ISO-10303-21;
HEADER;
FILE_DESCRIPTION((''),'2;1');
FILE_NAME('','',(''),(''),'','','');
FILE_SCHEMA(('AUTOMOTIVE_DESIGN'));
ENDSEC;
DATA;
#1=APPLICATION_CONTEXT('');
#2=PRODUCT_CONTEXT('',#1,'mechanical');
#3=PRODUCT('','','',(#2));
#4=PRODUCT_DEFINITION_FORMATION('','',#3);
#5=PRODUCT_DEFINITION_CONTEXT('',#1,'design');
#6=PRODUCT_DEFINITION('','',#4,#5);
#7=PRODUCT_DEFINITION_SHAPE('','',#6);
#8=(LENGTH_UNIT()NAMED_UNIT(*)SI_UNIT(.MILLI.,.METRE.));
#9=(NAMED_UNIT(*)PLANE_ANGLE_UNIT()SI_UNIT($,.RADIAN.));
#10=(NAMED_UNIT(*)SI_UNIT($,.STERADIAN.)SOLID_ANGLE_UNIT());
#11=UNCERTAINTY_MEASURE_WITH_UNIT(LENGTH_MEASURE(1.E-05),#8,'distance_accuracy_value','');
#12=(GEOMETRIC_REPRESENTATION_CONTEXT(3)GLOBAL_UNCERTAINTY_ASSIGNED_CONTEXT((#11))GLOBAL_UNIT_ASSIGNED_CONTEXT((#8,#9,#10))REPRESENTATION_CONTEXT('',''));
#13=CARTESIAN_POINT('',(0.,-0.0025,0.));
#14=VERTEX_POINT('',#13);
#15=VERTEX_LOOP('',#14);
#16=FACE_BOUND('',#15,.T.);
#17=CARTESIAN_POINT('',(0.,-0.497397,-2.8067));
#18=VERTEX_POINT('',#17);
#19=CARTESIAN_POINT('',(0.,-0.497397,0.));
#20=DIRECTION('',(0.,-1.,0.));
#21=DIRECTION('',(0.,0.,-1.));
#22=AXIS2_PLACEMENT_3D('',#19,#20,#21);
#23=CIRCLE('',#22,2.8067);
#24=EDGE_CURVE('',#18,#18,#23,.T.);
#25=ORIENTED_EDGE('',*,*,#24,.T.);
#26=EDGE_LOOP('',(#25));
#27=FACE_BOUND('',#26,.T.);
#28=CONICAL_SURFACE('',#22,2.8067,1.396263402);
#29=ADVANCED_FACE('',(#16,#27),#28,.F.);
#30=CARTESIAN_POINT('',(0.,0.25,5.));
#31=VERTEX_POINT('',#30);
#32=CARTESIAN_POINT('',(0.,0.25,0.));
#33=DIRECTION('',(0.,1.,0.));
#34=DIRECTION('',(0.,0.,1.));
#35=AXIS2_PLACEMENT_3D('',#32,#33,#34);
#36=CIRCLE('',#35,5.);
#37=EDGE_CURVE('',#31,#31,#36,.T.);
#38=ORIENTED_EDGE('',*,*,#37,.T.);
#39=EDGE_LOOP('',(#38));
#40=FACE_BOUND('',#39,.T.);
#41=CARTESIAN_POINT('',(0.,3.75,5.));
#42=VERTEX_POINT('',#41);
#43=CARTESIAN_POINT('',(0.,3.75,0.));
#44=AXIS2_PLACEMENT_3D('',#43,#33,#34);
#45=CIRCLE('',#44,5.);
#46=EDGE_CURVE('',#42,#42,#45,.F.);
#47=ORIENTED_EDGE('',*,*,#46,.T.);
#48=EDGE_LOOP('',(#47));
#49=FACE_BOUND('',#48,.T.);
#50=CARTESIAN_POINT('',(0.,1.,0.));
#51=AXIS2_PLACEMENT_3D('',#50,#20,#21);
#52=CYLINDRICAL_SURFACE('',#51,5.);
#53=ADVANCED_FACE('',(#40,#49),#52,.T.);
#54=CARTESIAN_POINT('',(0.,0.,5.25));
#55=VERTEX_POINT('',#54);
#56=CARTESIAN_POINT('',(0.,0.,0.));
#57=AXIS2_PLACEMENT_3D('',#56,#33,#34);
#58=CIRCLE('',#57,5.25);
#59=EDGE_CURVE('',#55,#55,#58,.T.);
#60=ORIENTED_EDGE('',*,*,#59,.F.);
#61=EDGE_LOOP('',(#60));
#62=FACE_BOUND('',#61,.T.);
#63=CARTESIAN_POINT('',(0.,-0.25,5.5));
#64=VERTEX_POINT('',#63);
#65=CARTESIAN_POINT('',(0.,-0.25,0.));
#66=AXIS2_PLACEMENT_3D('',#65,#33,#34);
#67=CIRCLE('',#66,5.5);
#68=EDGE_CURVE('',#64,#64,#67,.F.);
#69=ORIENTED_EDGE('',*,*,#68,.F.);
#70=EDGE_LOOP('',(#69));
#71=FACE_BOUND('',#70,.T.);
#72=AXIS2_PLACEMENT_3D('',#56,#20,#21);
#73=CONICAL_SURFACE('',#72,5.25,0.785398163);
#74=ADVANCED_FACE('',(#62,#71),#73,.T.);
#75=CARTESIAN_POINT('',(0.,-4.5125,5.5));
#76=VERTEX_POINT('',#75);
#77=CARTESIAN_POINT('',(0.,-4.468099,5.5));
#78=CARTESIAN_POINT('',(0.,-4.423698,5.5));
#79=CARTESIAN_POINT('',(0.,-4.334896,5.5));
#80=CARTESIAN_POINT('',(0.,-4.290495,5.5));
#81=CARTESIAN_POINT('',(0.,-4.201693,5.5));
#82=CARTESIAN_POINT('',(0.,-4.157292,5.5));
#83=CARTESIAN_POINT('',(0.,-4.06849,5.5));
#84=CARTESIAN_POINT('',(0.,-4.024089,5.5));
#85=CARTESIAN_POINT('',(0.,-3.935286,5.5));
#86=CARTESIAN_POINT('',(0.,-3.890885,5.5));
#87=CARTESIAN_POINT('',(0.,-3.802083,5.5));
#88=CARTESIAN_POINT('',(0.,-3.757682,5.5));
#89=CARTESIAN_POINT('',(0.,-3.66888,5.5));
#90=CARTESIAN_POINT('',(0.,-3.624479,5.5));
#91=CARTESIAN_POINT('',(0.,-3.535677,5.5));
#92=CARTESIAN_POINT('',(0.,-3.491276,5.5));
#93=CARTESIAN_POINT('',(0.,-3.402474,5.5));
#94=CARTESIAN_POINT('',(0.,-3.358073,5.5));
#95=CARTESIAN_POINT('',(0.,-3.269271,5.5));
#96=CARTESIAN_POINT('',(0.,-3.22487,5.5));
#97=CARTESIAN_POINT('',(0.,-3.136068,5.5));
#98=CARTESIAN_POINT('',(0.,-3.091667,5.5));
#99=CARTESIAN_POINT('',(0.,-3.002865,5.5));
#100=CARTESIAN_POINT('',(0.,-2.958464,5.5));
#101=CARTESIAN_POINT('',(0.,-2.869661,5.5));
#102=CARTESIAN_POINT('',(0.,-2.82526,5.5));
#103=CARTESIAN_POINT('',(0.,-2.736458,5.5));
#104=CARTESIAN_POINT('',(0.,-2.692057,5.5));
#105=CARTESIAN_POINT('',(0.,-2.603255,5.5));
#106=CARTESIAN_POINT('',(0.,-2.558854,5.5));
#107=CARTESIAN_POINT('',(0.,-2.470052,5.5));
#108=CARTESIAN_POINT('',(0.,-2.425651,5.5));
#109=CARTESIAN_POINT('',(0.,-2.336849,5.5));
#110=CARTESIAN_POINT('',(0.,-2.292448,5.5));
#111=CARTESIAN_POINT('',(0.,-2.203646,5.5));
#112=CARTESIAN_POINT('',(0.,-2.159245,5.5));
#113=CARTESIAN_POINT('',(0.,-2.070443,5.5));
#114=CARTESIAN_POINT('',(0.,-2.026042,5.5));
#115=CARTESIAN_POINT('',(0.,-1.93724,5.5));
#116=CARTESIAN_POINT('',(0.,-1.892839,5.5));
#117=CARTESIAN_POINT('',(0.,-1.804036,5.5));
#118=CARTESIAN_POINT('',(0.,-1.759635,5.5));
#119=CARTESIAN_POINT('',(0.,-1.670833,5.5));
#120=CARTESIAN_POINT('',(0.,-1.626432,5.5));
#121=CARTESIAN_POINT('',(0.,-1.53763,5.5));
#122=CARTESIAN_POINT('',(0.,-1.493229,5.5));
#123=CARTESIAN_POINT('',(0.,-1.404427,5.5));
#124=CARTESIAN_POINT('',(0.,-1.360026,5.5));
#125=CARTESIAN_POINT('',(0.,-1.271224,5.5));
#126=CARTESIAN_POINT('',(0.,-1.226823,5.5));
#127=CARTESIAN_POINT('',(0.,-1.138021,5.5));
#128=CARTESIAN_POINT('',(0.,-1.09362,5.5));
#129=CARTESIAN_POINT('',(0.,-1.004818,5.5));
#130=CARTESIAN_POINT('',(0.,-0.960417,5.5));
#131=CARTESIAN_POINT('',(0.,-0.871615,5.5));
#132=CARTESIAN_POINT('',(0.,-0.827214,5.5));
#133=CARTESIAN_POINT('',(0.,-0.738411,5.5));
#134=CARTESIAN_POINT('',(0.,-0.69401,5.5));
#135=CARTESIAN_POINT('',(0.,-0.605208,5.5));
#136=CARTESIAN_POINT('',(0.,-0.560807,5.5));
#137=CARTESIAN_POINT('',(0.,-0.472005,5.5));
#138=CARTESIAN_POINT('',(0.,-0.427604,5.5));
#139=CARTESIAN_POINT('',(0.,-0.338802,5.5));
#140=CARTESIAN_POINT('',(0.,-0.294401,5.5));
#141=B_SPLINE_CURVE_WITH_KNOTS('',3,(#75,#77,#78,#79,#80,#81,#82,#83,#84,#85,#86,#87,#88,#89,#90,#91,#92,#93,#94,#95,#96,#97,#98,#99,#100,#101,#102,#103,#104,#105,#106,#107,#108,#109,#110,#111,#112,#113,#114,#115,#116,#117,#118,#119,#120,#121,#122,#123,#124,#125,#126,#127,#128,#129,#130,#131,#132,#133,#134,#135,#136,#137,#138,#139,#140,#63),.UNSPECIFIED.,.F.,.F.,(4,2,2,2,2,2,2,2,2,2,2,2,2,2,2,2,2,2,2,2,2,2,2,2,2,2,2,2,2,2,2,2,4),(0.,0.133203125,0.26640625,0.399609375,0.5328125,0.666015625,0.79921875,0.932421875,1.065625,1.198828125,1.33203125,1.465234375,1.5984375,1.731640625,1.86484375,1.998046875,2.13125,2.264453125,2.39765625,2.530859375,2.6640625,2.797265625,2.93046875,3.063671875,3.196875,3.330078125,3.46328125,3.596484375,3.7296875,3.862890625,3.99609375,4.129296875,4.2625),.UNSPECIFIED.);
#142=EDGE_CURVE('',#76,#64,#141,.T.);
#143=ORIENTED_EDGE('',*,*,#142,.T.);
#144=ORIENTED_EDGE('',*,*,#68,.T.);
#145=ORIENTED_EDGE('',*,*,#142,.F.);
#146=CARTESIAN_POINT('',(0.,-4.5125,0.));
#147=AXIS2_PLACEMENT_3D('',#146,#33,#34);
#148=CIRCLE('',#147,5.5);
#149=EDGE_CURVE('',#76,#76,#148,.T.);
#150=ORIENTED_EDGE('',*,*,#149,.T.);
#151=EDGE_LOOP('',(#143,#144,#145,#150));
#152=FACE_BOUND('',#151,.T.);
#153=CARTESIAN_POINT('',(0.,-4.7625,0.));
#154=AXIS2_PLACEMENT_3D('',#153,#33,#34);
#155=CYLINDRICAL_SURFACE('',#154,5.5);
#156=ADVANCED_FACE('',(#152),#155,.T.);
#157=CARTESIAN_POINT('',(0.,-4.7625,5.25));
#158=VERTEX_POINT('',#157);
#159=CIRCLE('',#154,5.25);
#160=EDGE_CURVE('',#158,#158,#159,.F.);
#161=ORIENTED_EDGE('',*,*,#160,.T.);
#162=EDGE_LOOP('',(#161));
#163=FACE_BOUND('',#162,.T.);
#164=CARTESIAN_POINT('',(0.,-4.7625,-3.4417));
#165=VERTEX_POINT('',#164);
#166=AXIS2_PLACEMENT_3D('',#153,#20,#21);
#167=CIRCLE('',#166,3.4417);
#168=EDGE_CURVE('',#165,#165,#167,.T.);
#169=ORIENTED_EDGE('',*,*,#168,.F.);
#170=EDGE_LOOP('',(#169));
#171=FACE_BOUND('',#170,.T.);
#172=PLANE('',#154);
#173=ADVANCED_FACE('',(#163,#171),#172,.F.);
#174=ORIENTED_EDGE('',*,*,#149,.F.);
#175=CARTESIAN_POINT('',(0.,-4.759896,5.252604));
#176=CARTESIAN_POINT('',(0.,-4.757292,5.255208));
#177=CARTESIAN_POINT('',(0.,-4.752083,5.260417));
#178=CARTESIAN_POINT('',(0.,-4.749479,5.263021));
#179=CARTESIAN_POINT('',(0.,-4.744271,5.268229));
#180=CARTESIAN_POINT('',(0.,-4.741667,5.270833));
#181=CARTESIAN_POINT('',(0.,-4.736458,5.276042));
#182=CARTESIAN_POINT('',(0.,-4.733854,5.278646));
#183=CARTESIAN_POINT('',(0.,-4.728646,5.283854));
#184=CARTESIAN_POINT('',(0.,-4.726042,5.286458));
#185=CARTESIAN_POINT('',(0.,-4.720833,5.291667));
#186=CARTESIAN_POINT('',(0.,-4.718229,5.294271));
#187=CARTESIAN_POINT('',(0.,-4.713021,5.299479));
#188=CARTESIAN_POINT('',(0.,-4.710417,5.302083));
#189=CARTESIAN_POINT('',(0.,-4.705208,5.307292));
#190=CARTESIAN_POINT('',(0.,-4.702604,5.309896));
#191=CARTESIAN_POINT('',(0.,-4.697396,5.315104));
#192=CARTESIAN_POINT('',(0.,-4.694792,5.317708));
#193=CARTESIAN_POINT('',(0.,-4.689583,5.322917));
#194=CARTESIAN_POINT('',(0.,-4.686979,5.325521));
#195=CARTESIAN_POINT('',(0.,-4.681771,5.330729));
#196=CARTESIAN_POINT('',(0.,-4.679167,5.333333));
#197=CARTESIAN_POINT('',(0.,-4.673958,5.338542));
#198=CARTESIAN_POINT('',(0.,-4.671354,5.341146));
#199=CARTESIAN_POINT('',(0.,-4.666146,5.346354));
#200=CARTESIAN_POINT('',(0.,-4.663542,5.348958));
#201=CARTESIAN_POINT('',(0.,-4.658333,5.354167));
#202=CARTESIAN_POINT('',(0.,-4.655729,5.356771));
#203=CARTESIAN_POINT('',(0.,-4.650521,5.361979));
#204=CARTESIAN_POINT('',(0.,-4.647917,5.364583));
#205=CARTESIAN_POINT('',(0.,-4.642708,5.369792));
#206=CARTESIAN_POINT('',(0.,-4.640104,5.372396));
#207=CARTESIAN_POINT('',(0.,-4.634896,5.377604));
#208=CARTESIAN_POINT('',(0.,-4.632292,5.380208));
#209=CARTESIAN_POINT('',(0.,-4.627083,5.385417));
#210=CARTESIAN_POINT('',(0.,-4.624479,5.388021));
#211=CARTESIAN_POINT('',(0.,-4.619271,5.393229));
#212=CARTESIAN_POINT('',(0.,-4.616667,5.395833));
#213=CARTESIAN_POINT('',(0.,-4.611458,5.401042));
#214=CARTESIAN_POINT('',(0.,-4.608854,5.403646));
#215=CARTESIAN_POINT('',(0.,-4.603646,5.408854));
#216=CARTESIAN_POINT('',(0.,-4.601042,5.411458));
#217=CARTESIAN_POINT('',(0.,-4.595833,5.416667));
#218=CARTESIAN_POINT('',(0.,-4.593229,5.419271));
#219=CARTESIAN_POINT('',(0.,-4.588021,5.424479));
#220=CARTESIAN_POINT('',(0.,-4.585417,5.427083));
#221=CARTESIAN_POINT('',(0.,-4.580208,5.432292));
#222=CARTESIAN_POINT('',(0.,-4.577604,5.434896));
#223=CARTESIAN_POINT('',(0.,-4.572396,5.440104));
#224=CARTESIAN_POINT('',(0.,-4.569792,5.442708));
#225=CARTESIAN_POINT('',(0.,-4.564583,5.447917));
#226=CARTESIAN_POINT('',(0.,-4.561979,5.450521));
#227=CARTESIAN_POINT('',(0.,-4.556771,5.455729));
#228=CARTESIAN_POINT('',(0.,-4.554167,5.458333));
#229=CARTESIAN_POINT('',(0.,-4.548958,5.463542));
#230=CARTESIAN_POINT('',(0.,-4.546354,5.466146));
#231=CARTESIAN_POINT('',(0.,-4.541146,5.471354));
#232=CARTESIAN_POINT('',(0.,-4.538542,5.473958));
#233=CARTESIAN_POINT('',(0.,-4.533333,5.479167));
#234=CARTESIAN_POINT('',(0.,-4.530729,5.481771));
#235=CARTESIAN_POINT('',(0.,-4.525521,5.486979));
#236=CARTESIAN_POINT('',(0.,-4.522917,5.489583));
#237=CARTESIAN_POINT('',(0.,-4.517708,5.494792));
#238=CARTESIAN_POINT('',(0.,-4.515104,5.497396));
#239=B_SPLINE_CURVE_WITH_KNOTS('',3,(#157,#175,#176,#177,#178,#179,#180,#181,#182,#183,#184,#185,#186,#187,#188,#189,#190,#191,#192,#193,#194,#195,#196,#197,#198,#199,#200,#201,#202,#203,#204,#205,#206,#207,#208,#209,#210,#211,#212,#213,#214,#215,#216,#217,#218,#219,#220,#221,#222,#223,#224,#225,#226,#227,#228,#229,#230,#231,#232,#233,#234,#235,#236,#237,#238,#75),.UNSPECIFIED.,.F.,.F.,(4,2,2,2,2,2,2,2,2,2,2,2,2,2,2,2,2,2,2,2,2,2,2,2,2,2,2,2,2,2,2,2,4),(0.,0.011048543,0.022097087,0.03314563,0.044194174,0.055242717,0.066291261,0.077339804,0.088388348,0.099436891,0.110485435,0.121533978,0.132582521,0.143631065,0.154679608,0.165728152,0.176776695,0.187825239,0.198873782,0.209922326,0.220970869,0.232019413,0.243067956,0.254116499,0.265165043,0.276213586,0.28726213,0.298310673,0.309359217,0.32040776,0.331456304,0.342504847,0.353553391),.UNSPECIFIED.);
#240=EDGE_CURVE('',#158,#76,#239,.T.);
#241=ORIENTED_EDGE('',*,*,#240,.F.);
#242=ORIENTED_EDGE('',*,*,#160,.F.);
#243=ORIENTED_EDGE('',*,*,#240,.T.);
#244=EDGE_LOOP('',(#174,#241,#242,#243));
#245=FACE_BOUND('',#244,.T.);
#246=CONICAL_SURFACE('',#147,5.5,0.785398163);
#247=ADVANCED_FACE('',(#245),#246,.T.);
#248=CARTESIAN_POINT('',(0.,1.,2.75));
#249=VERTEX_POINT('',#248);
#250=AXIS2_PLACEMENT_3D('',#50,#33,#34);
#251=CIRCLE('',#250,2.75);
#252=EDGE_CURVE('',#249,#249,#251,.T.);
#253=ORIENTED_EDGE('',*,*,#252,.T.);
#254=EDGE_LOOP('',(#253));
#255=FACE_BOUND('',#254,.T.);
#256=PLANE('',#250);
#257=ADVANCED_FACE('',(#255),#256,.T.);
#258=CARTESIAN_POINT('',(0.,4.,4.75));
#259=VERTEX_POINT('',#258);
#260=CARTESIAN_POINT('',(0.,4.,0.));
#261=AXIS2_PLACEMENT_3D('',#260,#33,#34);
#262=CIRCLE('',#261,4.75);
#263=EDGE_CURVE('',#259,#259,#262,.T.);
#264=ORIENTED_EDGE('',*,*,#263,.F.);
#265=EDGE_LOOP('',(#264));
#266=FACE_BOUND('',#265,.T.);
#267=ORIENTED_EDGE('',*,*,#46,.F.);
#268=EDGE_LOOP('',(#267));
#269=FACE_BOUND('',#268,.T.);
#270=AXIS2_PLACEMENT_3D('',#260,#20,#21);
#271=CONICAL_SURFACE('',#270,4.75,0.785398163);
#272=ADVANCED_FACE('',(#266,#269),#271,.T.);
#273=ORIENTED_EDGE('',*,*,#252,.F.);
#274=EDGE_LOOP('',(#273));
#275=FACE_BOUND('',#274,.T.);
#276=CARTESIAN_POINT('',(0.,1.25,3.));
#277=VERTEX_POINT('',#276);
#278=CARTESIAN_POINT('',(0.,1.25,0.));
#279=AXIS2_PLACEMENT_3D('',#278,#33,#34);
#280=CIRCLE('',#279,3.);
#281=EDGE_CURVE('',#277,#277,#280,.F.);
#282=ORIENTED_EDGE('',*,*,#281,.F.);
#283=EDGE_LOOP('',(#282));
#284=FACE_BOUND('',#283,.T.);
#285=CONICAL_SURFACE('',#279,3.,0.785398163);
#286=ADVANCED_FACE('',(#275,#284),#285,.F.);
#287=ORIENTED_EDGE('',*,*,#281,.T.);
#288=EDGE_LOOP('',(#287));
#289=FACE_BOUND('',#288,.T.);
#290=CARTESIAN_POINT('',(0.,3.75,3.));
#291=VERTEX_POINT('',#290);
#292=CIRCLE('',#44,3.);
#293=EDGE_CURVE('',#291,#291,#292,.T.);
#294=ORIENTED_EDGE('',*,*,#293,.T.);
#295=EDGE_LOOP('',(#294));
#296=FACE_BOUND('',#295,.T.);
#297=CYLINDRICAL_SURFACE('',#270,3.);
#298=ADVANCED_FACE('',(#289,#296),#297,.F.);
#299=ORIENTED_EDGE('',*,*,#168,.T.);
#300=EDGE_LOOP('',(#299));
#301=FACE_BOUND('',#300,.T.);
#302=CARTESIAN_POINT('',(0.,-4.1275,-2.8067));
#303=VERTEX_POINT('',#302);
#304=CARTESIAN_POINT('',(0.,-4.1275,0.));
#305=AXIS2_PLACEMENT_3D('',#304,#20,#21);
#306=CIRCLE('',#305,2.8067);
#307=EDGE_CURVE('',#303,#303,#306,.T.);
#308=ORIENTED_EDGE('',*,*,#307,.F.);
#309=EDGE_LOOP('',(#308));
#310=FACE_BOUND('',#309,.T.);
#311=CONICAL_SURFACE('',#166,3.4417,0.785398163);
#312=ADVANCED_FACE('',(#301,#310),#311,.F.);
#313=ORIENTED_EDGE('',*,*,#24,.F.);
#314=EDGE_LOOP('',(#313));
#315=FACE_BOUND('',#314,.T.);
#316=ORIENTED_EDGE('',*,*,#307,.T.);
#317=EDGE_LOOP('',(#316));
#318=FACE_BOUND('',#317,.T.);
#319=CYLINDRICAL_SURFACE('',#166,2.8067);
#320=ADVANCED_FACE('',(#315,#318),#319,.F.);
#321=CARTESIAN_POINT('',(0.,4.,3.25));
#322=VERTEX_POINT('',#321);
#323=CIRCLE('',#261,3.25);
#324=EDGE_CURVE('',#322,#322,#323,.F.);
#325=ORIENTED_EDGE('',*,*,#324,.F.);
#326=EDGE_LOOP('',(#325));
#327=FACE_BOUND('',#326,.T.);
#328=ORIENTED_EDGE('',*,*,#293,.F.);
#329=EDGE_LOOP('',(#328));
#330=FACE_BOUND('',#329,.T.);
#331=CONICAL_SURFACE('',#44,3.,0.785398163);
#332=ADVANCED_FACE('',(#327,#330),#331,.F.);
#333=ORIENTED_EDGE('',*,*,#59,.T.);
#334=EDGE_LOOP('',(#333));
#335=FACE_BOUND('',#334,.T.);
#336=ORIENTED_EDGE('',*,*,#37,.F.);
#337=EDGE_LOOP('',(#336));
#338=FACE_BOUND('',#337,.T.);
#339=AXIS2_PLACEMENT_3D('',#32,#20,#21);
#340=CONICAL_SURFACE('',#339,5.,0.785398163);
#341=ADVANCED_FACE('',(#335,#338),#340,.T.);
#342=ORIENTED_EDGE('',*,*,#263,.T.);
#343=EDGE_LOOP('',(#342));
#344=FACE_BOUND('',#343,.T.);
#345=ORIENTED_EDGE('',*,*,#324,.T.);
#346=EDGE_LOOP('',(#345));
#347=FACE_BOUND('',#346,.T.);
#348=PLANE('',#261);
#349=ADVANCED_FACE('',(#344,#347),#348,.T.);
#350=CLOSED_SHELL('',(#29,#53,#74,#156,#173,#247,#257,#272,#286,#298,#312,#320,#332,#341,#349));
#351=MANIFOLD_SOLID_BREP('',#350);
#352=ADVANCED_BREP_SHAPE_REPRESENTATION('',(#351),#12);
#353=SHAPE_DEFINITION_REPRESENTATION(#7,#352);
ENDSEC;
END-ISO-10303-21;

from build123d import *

# Parameters (mm, degrees)
SKETCH1_R                            = 5
SKETCH1_R_2                          = 3
BOSS_EXTRUDE1_DEPTH                  = 1
SKETCH1_3_R                          = 5
SKETCH1_3_R_2                        = 3
BOSS_EXTRUDE2_DEPTH                  = 4
CHAMFER1_SIZE                        = 0.25
SKETCH5_R                            = 5.5
BOSS_EXTRUDE4_DEPTH                  = 4.7625
F_2_0_221_DIAMETER_HOLE1_D           = 5.6134
F_2_0_221_DIAMETER_HOLE1_DEPTH       = 4.265103063
F_2_0_221_DIAMETER_HOLE1_CSINK_D     = 6.8834
F_2_0_221_DIAMETER_HOLE1_CSINK_ANGLE = 90
F_2_0_221_DIAMETER_HOLE1_TIP         = 0.494896937
CHAMFER2_SIZE                        = 0.25
CHAMFER3_SIZE                        = 0.25


with BuildPart() as part:
    # Sketch1 → Boss-Extrude1 (new body)
    # profile 1 of 2: a face of its own
    with BuildSketch(Plane(origin=(0, 0, 0), x_dir=(1, 0, 0), z_dir=(0, 1, 0))):
        with Locations(Location((0, 0, 0), (0, 0, 270))):
            Circle(SKETCH1_R)
        Circle(SKETCH1_R_2, mode=Mode.SUBTRACT)
    # profile 2 of 2: a face of its own
    with BuildSketch(Plane(origin=(0, 0, 0), x_dir=(1, 0, 0), z_dir=(0, 1, 0))):
        Circle(SKETCH1_R_2)
    extrude(amount=BOSS_EXTRUDE1_DEPTH)

    # Sketch1<3> → Boss-Extrude2 (add)
    with BuildSketch(Plane(origin=(0, 0, 0), x_dir=(1, 0, 0), z_dir=(0, 1, 0))):
        with Locations(Location((0, 0, 0), (0, 0, 270))):
            Circle(SKETCH1_3_R)
        with Locations(Location((0, 0, 0), (0, 0, 270))):
            Circle(SKETCH1_3_R_2, mode=Mode.SUBTRACT)
    extrude(amount=BOSS_EXTRUDE2_DEPTH)

    # Chamfer1
    chamfer1_edges = [part.edges().sort_by_distance(p)[0] for p in [
        (0, 1, -3),
        (0, 4, -5),
        (0, 4, -3),
    ]]
    chamfer(chamfer1_edges, length=CHAMFER1_SIZE)

    # Sketch5 → Boss-Extrude4 (add)
    with BuildSketch(Plane(origin=(0, 0, 0), x_dir=(1, 0, 0), z_dir=(0, 1, 0))):
        with Locations(Location((0, 0, 0), (0, 0, 270))):
            Circle(SKETCH5_R)
    extrude(amount=-BOSS_EXTRUDE4_DEPTH)

    # #2 (0.221) Diameter Hole1
    with Locations(Plane(origin=(0, -4.7625, 0), x_dir=(-1, 0, 0), z_dir=(0, -1, 0))):
        with Locations((0, 0)):
            CounterSinkHole(F_2_0_221_DIAMETER_HOLE1_D / 2, F_2_0_221_DIAMETER_HOLE1_CSINK_D / 2, depth=F_2_0_221_DIAMETER_HOLE1_DEPTH, counter_sink_angle=F_2_0_221_DIAMETER_HOLE1_CSINK_ANGLE)
            with Locations((0, 0, -(F_2_0_221_DIAMETER_HOLE1_DEPTH + F_2_0_221_DIAMETER_HOLE1_TIP / 2))):  # 160° drill point
                Cone(0, F_2_0_221_DIAMETER_HOLE1_D / 2, F_2_0_221_DIAMETER_HOLE1_TIP, mode=Mode.SUBTRACT)

    # Chamfer2
    chamfer2_edges = [part.edges().sort_by_distance(p)[0] for p in [
        (0, -4.7625, -5.5),
        (0, 0, -5.5),
    ]]
    chamfer(chamfer2_edges, length=CHAMFER2_SIZE)

    # Chamfer3
    chamfer3_edges = [part.edges().sort_by_distance(p)[0] for p in [
        (0, 0, -5),
    ]]
    chamfer(chamfer3_edges, length=CHAMFER3_SIZE - 0.0001)  # a hair under: the kernel refuses the full size


solid = part.part
